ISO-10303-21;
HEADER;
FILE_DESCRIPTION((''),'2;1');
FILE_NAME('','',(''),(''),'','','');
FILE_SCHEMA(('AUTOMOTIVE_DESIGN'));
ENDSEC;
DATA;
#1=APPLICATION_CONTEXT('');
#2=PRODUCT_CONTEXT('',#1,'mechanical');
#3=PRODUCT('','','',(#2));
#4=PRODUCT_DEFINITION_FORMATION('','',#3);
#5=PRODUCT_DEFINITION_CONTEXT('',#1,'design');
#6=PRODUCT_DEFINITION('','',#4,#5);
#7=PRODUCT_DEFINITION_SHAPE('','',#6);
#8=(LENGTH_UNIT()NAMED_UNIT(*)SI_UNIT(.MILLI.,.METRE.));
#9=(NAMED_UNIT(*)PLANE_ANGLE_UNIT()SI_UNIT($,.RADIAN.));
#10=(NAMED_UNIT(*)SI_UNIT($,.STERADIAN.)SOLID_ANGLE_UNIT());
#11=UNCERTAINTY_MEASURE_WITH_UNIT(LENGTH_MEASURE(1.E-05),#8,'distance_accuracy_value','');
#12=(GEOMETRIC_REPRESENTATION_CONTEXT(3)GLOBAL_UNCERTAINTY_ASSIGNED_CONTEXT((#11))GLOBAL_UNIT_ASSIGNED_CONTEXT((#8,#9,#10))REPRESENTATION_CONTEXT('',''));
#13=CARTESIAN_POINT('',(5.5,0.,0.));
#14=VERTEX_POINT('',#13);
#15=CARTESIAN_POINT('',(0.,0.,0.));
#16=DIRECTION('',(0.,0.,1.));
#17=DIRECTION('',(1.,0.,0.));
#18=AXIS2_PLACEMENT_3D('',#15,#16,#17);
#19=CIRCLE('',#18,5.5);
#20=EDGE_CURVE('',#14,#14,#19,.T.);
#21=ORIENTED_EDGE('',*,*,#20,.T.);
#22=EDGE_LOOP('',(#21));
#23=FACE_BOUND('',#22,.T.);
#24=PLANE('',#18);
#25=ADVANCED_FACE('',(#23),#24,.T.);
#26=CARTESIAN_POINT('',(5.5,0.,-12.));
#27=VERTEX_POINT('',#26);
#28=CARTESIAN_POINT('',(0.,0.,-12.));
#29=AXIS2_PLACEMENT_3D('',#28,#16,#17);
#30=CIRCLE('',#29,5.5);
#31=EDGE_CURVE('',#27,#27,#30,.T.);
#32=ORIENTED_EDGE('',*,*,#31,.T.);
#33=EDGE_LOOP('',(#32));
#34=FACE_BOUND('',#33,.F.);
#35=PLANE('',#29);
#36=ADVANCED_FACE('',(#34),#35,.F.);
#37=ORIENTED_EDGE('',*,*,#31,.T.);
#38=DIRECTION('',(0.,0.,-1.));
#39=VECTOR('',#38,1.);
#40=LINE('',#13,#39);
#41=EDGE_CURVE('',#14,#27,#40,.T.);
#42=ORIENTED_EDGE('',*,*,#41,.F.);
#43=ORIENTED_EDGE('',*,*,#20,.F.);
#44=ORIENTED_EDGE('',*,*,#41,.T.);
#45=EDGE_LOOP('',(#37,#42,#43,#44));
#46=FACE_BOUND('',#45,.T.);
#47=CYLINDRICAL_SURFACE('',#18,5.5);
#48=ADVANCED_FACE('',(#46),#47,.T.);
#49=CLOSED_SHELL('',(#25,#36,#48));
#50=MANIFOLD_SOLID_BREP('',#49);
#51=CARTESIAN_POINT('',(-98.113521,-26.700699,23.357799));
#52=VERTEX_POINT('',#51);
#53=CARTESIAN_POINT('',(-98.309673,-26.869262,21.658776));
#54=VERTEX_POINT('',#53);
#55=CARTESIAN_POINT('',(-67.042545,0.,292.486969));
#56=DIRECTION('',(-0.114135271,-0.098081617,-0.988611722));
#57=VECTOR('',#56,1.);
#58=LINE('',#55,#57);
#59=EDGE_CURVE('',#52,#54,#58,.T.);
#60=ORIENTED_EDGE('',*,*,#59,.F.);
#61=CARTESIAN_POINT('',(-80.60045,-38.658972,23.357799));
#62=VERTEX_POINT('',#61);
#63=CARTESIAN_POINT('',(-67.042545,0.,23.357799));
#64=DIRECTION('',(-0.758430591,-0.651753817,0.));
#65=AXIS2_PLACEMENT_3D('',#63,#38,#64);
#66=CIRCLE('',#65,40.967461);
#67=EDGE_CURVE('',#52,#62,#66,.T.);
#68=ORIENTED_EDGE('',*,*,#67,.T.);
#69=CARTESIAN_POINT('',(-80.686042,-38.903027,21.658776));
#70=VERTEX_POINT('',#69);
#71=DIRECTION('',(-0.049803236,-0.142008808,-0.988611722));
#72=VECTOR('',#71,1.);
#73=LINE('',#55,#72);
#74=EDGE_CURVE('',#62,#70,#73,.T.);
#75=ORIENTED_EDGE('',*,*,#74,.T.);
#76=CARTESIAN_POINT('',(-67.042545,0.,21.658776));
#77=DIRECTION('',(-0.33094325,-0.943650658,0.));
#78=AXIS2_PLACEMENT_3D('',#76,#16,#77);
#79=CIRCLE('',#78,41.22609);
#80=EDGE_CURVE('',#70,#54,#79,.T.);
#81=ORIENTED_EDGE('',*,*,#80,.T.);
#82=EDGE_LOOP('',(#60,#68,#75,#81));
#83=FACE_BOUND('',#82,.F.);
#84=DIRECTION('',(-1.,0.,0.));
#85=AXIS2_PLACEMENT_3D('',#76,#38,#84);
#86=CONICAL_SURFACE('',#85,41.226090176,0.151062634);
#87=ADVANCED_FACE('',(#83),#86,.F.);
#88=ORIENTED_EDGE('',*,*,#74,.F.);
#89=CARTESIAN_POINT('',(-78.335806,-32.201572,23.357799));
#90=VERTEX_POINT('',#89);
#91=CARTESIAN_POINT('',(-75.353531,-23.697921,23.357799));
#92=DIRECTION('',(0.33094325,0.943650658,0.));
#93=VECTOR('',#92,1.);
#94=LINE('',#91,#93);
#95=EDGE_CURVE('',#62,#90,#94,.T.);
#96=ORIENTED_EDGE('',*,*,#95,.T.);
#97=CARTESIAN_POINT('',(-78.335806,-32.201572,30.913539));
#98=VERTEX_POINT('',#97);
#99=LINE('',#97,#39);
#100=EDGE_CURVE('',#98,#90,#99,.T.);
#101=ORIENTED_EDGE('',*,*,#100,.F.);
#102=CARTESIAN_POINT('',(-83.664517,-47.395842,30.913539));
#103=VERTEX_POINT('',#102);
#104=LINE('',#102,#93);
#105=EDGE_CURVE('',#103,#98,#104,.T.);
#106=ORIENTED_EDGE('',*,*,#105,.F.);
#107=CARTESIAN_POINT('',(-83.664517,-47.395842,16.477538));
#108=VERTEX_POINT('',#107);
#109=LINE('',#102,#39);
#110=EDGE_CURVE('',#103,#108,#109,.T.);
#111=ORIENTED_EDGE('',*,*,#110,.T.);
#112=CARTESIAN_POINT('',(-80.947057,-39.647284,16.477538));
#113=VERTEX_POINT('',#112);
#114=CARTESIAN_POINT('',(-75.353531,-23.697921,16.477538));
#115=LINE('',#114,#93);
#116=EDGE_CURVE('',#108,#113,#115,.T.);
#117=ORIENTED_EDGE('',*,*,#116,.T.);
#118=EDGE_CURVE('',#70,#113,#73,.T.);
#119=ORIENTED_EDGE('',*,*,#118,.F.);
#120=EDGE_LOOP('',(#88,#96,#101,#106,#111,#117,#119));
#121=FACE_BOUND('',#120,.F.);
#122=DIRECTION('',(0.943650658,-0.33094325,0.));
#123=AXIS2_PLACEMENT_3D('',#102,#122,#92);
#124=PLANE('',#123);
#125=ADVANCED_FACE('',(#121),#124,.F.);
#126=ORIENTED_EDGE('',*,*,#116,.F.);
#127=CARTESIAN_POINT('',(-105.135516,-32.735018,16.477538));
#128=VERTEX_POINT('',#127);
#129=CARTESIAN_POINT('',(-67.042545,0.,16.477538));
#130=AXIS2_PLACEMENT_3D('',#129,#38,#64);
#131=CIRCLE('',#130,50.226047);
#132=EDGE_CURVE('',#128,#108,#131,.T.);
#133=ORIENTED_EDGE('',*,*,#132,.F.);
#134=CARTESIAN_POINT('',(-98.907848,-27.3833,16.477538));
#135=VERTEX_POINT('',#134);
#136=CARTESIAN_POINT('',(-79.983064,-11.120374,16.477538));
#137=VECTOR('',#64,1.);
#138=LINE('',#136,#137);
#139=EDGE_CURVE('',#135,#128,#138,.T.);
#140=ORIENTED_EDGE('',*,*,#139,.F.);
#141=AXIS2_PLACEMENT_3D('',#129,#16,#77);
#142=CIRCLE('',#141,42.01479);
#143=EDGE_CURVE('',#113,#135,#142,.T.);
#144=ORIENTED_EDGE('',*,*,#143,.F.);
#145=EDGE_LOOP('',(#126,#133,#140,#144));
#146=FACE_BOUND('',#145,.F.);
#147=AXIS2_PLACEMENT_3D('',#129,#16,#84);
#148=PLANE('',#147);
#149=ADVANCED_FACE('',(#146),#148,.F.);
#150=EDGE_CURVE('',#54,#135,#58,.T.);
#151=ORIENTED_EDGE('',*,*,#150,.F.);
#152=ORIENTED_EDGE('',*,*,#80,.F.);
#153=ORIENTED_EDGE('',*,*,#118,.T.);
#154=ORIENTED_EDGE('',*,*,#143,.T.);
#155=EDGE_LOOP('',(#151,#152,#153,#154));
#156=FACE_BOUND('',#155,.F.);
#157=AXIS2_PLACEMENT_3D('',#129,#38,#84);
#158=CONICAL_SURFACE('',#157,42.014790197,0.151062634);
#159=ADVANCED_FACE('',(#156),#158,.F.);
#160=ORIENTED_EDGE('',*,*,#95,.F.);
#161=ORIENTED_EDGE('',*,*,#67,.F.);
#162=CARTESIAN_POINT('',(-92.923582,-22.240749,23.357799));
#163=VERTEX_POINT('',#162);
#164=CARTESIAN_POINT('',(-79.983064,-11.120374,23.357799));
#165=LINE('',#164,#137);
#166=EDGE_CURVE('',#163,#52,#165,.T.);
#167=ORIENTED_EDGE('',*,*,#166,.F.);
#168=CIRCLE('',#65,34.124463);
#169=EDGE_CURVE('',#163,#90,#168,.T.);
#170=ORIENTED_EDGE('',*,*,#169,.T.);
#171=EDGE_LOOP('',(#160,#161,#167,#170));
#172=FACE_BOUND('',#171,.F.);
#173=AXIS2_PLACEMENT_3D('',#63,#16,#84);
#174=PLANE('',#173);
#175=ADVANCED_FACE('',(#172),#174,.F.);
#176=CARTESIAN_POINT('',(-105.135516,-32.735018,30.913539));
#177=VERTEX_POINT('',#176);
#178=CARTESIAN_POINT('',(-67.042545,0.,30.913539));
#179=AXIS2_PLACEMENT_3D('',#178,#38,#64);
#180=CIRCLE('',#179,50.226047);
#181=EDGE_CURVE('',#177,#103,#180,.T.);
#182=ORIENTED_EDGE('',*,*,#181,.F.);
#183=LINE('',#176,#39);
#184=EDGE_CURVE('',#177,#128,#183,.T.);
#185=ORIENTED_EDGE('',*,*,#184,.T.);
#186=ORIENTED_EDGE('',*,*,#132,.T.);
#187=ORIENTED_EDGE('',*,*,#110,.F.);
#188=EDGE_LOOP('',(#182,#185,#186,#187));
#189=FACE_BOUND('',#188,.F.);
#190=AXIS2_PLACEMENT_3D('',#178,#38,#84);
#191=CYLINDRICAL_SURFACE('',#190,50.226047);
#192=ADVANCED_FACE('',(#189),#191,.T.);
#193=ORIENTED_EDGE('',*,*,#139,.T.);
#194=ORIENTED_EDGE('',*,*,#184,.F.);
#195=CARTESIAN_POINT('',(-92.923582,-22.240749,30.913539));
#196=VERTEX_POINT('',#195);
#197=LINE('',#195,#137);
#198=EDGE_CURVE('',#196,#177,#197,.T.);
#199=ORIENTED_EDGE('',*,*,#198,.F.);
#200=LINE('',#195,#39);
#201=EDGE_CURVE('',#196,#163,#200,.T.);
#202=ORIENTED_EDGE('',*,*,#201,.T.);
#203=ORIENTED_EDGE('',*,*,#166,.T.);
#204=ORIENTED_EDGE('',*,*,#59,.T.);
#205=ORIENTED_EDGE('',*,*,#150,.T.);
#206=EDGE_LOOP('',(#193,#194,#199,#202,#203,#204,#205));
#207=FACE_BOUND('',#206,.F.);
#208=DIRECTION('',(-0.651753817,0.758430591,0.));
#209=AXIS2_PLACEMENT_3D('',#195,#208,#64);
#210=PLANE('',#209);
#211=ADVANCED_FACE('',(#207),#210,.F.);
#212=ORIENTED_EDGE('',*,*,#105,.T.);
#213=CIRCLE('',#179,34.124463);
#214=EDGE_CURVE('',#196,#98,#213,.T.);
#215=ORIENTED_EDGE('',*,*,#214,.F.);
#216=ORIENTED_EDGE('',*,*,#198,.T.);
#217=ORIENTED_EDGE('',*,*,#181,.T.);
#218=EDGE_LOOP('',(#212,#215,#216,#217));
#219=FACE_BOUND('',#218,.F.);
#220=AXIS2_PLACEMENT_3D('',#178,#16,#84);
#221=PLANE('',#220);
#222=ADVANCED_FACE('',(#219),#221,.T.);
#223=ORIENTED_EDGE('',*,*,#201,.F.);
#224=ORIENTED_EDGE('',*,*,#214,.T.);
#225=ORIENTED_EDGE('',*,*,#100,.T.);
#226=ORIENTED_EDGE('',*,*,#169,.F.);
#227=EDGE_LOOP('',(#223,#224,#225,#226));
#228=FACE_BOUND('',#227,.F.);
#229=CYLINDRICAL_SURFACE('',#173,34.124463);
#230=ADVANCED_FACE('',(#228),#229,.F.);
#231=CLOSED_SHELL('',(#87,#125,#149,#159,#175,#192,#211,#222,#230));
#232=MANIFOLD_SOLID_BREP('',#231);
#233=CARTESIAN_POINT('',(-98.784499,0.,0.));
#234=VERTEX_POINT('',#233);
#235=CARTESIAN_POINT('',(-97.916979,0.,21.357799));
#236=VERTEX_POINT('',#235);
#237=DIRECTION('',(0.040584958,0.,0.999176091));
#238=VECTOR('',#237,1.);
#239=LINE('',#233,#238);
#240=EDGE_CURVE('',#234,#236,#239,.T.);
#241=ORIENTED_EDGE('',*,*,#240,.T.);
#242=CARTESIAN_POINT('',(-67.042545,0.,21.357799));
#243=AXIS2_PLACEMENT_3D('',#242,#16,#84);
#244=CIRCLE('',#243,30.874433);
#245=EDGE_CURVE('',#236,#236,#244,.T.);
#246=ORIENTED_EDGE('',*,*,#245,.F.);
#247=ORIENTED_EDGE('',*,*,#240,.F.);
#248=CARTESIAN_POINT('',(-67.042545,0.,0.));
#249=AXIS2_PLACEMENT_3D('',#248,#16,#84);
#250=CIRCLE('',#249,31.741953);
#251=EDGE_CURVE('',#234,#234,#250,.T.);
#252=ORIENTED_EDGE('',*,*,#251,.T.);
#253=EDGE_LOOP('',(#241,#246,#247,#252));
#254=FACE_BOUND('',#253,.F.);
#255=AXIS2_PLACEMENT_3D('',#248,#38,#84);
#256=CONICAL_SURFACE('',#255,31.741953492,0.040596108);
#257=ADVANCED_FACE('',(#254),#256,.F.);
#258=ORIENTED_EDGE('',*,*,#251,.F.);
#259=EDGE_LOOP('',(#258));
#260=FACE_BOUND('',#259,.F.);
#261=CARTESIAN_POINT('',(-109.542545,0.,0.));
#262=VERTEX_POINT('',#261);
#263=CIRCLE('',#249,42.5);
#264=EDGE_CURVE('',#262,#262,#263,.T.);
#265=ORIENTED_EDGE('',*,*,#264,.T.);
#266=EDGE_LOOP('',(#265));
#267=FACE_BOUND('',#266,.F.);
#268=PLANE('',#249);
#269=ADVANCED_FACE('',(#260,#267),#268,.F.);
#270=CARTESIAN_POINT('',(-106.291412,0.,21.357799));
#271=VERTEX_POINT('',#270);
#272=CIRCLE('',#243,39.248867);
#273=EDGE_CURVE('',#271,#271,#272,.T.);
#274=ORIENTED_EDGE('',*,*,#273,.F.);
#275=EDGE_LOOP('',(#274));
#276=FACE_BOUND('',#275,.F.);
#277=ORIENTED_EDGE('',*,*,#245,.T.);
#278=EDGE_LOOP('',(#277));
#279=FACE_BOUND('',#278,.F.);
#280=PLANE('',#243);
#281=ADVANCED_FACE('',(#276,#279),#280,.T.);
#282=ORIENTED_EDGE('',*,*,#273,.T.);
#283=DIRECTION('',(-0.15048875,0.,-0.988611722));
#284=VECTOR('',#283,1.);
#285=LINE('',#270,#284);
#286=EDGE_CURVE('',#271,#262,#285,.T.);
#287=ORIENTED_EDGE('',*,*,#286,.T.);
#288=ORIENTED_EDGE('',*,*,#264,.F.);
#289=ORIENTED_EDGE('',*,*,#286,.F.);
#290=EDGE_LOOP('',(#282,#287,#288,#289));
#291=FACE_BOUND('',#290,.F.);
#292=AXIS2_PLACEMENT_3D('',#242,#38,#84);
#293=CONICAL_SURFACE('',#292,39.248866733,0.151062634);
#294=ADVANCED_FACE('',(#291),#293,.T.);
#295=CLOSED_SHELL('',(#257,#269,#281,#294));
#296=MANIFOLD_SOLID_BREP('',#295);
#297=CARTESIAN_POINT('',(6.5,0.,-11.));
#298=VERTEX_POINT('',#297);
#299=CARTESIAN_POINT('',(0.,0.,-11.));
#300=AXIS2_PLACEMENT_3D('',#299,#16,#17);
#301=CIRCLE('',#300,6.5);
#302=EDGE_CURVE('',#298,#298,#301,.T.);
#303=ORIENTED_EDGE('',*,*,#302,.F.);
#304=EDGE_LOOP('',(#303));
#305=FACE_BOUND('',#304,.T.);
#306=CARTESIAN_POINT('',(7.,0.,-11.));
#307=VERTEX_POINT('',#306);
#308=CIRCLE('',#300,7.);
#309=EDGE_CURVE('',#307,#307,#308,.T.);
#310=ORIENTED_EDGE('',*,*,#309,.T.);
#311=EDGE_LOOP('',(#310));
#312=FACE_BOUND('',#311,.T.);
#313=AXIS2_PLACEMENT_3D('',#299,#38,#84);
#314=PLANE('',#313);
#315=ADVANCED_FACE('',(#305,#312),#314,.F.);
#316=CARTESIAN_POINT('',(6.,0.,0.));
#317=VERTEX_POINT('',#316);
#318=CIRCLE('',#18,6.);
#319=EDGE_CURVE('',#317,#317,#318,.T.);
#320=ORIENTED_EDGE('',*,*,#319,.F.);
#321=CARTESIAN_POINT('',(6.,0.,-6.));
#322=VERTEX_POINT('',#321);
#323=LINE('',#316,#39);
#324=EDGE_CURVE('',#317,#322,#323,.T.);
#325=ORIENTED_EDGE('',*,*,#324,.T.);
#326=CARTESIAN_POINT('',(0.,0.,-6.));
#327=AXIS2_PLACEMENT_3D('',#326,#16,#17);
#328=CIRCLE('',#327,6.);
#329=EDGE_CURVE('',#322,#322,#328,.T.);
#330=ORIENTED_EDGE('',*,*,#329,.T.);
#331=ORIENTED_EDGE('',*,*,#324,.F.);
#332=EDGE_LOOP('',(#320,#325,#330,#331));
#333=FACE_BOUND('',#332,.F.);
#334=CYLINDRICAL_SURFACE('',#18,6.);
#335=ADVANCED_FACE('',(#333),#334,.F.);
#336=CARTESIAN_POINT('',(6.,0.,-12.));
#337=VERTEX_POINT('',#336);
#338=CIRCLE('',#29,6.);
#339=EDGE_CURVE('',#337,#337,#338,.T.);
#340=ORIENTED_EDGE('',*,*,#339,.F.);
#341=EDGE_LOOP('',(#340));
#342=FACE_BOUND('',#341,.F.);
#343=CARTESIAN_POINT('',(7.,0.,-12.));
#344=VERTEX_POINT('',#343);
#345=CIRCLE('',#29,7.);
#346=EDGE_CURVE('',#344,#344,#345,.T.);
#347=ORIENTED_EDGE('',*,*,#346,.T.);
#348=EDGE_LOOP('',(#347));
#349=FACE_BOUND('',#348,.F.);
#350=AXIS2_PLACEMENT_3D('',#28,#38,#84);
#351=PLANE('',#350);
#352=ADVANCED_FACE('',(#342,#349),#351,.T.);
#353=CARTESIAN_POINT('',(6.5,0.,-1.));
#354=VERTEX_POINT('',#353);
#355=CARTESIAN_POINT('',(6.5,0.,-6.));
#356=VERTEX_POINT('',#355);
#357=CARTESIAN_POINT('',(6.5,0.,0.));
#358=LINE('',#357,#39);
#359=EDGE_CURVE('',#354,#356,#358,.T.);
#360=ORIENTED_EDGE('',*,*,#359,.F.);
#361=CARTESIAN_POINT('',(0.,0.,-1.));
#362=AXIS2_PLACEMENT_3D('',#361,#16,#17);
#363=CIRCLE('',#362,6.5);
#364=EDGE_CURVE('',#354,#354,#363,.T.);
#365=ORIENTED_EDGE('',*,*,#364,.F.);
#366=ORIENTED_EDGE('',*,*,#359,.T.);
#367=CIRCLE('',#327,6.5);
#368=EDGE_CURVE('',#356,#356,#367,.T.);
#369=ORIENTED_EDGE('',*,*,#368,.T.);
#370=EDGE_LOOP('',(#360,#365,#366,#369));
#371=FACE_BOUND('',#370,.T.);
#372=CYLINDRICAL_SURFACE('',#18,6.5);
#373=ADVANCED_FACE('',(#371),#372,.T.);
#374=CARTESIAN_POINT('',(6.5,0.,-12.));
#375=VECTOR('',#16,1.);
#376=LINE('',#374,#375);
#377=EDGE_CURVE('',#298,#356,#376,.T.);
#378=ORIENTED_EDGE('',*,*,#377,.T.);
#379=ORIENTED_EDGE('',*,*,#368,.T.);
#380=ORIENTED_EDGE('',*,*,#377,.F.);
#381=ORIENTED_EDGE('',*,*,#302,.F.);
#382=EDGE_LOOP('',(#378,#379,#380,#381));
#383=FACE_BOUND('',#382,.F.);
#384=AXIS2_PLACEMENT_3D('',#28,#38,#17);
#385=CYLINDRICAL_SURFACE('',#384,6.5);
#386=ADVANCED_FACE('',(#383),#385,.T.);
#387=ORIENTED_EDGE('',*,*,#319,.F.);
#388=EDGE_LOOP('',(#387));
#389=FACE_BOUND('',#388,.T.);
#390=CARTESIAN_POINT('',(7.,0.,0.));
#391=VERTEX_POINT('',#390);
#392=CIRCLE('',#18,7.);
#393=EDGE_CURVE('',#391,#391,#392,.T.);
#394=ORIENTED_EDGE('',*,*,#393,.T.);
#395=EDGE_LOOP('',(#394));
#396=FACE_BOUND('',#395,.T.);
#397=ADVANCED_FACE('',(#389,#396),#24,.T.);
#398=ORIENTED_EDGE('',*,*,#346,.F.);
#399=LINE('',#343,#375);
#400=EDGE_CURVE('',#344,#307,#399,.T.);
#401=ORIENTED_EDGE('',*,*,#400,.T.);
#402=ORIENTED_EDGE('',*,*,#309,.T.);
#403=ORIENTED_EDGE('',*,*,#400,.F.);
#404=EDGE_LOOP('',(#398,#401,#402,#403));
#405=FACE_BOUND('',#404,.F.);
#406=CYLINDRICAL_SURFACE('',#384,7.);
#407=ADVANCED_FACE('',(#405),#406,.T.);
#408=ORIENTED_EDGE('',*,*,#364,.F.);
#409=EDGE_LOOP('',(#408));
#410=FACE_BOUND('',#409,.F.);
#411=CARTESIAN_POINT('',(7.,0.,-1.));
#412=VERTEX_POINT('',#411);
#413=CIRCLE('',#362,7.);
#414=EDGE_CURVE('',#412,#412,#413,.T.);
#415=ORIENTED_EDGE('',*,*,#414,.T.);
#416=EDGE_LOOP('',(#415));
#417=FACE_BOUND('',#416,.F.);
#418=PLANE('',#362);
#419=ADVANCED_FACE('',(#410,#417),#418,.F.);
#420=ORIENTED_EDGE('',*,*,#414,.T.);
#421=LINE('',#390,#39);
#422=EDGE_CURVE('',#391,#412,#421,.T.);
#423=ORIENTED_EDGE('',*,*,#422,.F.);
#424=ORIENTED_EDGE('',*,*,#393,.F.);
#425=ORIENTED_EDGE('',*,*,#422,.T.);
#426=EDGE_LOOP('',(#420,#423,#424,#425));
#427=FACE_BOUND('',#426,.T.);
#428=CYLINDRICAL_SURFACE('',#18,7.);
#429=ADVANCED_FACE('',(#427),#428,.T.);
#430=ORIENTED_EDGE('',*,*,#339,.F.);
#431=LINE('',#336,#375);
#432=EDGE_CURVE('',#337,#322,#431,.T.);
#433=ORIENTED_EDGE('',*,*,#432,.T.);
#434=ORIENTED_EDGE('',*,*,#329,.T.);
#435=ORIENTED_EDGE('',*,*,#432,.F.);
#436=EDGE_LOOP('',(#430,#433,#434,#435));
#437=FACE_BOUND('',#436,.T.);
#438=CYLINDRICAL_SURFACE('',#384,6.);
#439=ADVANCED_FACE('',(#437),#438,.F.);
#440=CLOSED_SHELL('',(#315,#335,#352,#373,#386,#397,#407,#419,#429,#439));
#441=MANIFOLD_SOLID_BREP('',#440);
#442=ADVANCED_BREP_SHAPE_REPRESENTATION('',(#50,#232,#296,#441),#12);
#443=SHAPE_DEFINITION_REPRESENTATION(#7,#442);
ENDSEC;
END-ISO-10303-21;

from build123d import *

# Parameters (mm, degrees)
F0_R     = 6.5
F0_R_2   = 6
F1_DEPTH = 6
F0_R_3   = 7
F2_DEPTH = 1
F0_R_4   = 5.5
F4_DEPTH = 12
F9_DEPTH = 25


with BuildPart() as f1:
    # F0 (on Top) → F1 (new body)
    with BuildSketch(Plane.XY):
        Circle(F0_R)
        Circle(F0_R_2, mode=Mode.SUBTRACT)
    extrude(amount=-F1_DEPTH)

    # F0 (on Top) → F2 (join)
    with BuildSketch(Plane.XY):
        Circle(F0_R_3)
        Circle(F0_R, mode=Mode.SUBTRACT)
    extrude(amount=-F2_DEPTH)

    # F3: F1 across face


with BuildPart() as f1_1:
    add(f1.part)
    add(f1.part.mirror(Plane(origin=(0, 0, -6), x_dir=(1, 0, 0), z_dir=(0, 0, -1))))


with BuildPart() as f4:
    # F0 (on Top) → F4 (new body)
    with BuildSketch(Plane.XY):
        Circle(F0_R_4)
    extrude(amount=-F4_DEPTH)


with BuildPart() as f6:
    # F5 (on Front) → F6 (revolve)
    with BuildSketch(Plane.XZ):
        Polygon((-109.5425453782, 0), (-98.7844988704, 0), (-97.9169787446, 21.3577989489), (-106.291412111, 21.3577989489), align=None)
    revolve(axis=Axis((-67.0425453782, 0, 15), (0, 0, 1)))


with BuildPart() as f7:
    # F5 (on Front) → F7 (revolve)
    with BuildSketch(Plane.XZ):
        Polygon((-117.2685921192, 16.4775380677), (-109.0573355747, 16.4775380677), (-108.2686355544, 21.658776448), (-108.0100064425, 23.3577989489), (-106.291412111, 23.3577989489), (-101.1670082808, 23.3577989489), (-101.1670082808, 30.9135392308), (-117.2685921192, 30.9135392308), align=None)
    revolve(axis=Axis((-67.0425453782, 0, 15), (0, 0, 1)))

    # F8 (on face) → F9 (cut)
    with BuildSketch(Plane.XY.offset(30.9135392308)):
        with BuildLine():
            ThreePointArc((-78.3358060439, -32.2015718859), (-86.2853776046, -28.1814189901), (-92.9235819492, -22.2407489621))
            Line((-92.9235819492, -22.2407489621), (-105.1355156979, -32.7350176944))
            ThreePointArc((-105.1355156979, -32.7350176944), (-95.365083189, -41.4787852183), (-83.6645165335, -47.3958420765))
            Line((-83.6645165335, -47.3958420765), (-78.3358060439, -32.2015718859))
        make_face()
    extrude(amount=-F9_DEPTH, mode=Mode.SUBTRACT)


solid = Compound([f1_1.part, f4.part, f6.part, f7.part])
